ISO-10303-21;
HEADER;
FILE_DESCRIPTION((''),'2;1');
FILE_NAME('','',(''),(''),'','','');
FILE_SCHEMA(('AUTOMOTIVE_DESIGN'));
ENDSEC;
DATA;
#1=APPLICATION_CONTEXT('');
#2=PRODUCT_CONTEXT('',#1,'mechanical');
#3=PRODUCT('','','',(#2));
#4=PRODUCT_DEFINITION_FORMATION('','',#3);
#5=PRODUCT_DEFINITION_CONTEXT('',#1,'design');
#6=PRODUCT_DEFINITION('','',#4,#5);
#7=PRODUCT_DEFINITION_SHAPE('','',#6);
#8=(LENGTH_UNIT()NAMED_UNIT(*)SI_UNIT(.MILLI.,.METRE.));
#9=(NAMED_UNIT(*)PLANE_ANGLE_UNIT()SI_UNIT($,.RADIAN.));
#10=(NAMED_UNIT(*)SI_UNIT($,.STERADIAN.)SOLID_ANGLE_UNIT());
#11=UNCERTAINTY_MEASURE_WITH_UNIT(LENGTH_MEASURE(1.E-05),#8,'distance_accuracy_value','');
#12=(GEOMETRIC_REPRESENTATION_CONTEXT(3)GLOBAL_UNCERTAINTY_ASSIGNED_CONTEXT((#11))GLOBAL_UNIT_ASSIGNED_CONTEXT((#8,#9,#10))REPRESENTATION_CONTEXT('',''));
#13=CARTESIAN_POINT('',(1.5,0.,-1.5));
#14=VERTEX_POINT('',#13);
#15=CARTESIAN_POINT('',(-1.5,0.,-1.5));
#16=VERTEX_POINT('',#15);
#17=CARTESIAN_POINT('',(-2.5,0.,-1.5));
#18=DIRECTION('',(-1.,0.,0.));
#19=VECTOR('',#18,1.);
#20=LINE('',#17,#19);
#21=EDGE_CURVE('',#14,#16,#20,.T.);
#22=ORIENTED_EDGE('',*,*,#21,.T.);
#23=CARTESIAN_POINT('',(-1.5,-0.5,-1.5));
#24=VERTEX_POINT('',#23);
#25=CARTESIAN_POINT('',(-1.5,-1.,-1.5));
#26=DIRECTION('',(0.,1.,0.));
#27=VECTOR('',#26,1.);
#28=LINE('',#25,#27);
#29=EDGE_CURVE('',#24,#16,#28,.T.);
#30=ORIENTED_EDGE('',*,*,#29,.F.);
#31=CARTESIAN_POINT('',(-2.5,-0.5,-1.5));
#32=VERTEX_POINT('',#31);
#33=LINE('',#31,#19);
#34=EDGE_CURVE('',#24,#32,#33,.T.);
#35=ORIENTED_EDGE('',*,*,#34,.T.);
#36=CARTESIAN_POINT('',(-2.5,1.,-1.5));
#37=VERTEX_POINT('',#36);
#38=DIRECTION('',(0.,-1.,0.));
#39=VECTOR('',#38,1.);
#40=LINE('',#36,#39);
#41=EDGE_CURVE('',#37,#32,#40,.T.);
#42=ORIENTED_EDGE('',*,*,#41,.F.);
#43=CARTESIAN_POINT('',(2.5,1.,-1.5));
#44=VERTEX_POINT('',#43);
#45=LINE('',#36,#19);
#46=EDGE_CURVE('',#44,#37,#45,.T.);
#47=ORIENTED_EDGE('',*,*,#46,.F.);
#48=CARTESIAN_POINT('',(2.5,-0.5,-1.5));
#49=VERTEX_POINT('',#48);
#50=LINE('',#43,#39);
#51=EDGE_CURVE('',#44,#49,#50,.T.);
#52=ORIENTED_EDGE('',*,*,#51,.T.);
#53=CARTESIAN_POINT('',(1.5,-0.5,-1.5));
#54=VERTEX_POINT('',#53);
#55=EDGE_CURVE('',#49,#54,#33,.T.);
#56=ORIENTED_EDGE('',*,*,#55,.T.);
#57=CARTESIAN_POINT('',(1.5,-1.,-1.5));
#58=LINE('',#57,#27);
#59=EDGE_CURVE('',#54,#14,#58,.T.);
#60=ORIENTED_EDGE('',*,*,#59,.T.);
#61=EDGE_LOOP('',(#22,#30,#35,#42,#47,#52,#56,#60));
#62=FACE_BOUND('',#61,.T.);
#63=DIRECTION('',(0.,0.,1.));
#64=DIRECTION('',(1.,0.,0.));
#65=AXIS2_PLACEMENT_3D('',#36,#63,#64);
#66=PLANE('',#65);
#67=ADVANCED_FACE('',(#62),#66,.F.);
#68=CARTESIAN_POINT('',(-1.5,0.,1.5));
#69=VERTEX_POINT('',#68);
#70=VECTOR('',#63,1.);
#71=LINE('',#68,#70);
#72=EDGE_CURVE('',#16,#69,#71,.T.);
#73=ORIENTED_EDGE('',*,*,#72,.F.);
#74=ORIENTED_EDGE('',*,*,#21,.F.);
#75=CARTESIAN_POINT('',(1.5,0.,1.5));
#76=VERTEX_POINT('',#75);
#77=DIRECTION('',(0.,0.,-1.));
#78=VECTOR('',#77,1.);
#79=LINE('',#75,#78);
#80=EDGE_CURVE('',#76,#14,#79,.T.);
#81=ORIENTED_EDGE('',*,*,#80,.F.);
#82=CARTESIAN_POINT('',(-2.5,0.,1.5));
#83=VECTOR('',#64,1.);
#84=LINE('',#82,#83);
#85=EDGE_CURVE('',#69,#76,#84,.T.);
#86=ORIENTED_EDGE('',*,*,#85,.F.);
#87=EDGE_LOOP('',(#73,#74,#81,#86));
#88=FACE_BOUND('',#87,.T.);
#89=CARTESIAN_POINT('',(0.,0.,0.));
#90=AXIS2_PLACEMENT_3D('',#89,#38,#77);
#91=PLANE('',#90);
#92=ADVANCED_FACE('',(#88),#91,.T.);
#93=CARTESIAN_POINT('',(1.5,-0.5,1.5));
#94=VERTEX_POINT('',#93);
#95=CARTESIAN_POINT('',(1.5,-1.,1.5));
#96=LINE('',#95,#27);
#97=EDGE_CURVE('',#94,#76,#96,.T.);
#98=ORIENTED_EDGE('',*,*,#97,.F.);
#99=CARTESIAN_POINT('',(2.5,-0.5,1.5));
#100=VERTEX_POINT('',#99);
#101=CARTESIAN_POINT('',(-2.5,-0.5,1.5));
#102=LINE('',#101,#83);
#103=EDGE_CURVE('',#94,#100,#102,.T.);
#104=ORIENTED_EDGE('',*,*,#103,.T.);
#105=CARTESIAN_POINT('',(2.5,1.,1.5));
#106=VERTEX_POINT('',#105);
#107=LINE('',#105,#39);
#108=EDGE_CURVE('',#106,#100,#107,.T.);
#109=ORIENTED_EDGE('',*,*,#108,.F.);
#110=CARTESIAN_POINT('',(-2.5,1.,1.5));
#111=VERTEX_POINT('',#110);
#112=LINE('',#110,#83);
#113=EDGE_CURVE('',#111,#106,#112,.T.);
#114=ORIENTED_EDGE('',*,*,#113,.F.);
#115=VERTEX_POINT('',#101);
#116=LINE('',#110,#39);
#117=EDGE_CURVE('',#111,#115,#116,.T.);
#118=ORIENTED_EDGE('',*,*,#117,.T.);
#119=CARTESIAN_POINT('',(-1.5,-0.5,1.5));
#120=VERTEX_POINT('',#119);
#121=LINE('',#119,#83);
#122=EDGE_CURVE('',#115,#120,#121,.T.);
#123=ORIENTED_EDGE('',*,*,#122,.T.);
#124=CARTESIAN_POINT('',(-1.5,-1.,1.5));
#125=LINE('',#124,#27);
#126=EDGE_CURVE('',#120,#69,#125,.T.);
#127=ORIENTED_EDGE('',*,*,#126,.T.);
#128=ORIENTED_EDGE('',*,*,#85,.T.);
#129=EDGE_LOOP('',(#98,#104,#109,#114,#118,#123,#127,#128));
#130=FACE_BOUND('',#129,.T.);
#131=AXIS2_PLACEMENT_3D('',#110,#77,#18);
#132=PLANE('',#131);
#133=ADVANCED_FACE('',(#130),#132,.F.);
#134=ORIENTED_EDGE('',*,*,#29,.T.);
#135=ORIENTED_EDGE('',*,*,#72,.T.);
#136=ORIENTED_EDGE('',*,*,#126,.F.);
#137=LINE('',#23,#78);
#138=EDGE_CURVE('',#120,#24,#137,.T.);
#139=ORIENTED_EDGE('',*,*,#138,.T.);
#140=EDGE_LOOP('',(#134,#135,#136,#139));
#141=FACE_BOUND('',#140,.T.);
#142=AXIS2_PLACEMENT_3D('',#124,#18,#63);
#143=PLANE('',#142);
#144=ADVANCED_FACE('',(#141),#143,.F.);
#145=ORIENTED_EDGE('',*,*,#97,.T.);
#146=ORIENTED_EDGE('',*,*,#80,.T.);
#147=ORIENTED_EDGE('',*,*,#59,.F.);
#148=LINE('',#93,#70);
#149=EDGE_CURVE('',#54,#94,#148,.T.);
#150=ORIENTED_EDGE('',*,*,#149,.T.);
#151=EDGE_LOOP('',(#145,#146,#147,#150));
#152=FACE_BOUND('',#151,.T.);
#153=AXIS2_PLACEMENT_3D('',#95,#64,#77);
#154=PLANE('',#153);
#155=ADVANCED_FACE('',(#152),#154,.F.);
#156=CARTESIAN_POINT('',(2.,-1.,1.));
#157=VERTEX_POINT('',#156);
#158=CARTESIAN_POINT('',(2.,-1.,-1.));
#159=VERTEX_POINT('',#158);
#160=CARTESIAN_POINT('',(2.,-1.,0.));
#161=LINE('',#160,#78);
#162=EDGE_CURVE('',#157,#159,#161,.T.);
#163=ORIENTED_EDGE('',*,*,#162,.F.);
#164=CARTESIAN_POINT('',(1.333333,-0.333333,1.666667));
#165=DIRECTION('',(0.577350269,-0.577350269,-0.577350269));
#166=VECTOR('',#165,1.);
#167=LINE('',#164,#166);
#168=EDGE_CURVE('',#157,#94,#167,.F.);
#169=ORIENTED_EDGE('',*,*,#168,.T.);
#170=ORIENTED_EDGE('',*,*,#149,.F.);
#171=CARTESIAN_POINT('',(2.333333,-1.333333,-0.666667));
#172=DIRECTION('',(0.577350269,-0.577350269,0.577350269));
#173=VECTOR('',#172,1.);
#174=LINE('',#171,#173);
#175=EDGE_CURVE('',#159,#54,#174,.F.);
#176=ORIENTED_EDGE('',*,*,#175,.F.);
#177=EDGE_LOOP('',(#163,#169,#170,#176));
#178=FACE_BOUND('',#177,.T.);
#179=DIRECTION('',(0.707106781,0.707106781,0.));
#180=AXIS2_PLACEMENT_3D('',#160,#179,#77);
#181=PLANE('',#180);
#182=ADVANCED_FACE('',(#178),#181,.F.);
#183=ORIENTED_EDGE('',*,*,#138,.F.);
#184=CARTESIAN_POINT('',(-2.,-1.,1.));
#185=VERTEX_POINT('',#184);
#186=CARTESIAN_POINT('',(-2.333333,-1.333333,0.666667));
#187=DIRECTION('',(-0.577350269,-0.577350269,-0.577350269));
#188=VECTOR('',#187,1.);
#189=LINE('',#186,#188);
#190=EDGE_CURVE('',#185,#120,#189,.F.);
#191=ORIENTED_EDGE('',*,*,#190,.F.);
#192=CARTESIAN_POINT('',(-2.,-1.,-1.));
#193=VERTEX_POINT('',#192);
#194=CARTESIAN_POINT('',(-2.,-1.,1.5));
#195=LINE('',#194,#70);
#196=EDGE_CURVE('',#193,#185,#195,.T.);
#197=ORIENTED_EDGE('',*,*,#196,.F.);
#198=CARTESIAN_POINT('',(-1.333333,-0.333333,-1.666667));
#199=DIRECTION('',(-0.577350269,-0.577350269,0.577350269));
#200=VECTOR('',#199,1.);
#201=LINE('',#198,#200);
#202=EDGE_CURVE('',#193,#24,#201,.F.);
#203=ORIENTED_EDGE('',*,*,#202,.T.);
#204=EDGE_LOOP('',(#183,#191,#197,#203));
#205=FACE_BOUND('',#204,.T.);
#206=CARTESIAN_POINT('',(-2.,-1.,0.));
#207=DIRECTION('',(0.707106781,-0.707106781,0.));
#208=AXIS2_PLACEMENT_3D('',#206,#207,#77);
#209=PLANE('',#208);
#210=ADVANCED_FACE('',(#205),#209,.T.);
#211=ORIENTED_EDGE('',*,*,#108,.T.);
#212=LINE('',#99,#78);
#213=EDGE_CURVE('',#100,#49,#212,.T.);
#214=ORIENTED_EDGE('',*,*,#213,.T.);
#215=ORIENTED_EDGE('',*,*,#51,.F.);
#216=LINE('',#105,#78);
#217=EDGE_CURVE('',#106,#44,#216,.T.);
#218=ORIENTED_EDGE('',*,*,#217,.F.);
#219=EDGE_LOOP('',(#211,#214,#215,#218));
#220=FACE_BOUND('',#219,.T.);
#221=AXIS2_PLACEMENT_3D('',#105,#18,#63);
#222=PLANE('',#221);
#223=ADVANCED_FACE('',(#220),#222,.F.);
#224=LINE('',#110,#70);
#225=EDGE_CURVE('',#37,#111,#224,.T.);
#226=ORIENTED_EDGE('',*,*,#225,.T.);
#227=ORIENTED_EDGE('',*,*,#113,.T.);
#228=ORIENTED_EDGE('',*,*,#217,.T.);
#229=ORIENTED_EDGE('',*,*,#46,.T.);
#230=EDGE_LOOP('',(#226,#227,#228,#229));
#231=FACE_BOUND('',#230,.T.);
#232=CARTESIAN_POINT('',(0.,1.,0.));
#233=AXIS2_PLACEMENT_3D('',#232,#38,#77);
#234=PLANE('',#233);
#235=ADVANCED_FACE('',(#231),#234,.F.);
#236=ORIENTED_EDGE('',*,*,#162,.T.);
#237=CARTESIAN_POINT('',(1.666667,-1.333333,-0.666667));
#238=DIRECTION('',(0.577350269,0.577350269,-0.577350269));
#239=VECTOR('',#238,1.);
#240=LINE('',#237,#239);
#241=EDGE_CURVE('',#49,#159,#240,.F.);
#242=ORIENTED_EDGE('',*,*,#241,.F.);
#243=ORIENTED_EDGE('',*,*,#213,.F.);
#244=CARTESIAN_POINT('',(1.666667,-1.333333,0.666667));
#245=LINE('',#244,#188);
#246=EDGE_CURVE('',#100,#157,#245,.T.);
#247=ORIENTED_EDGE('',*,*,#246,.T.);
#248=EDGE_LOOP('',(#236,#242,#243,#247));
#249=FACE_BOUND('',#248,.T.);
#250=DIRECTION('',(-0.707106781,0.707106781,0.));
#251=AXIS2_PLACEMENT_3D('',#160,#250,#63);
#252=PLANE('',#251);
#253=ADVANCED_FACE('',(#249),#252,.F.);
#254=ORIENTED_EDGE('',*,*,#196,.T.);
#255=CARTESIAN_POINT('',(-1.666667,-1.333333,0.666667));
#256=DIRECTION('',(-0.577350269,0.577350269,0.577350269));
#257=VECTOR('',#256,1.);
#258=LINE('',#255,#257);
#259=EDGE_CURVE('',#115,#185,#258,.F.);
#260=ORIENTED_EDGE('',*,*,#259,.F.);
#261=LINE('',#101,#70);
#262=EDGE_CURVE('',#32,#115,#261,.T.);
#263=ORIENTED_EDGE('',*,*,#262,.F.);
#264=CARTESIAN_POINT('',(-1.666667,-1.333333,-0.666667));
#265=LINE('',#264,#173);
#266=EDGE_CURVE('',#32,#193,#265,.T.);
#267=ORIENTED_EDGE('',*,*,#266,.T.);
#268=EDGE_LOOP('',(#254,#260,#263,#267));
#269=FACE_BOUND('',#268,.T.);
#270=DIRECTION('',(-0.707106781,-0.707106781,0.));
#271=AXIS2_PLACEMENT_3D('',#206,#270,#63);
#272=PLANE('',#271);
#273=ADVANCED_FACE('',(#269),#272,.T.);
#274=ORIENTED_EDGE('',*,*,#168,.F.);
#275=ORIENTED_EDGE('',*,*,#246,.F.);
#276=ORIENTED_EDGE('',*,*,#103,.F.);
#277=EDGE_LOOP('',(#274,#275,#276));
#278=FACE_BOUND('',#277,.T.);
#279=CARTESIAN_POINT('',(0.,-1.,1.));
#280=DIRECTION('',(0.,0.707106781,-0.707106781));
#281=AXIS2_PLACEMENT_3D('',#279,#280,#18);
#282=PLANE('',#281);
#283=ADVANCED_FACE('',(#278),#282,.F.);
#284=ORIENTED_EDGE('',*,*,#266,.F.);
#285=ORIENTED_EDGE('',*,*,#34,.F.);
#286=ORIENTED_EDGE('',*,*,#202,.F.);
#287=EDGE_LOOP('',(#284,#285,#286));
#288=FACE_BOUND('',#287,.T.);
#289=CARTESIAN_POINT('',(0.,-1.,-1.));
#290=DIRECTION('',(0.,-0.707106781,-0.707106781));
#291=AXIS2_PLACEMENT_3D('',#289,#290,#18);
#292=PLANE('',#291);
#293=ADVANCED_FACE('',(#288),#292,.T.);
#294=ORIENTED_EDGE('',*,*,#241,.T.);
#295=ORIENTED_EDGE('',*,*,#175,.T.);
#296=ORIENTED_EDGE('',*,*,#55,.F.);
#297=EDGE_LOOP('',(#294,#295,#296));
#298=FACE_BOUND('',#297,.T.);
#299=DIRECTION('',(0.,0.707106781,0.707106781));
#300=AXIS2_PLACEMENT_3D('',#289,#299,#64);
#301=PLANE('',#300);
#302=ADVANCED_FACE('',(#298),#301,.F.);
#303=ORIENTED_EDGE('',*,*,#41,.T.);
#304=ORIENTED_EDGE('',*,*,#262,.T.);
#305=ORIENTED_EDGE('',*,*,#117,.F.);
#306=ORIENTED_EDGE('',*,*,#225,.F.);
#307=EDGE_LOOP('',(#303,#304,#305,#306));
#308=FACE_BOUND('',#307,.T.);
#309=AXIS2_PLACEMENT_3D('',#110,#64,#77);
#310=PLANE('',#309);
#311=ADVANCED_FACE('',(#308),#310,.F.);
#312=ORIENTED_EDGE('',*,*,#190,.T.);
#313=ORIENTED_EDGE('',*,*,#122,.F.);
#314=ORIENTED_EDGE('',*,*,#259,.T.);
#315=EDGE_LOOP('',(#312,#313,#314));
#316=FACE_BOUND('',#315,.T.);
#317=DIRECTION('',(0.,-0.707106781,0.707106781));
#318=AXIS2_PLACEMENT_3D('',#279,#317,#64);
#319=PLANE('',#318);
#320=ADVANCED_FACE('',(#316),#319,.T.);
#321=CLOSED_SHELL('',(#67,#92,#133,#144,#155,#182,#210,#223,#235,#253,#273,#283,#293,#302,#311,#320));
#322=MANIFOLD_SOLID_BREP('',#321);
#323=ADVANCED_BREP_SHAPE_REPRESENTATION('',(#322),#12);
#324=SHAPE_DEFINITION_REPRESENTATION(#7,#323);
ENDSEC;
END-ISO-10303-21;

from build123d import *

# Parameters (mm, degrees)
SKETCH1_W           = 5
SKETCH1_H           = 3
BOSS_EXTRUDE1_DEPTH = 1
SKETCH2_W           = 1
SKETCH2_H           = 3
BOSS_EXTRUDE2_DEPTH = 1
CHAMFER1_SIZE       = 0.5


with BuildPart() as part:
    # Sketch1 → Boss-Extrude1 (new body)
    with BuildSketch(Plane(origin=(0, 0, 0), x_dir=(1, 0, 0), z_dir=(0, 1, 0))):
        Rectangle(SKETCH1_W, SKETCH1_H)
    extrude(amount=BOSS_EXTRUDE1_DEPTH)

    # Sketch2 → Boss-Extrude2 (add)
    with BuildSketch(Plane.XZ):
        with Locations((-2, 0)):
            Rectangle(SKETCH2_W, SKETCH2_H)
        with Locations((2, 0)):
            Rectangle(SKETCH2_W, SKETCH2_H)
    extrude(amount=BOSS_EXTRUDE2_DEPTH)

    # Chamfer1
    chamfer1_edges = [part.edges().sort_by_distance(p)[0] for p in [
        (-2.5, -1, 0),
        (-2, -1, -1.5),
        (-1.5, -1, 0),
        (-2, -1, 1.5),
        (2.5, -1, 0),
        (2, -1, 1.5),
        (1.5, -1, 0),
        (2, -1, -1.5),
    ]]
    chamfer(chamfer1_edges, length=CHAMFER1_SIZE - 0.0001)  # a hair under: the kernel refuses the full size


solid = part.part
